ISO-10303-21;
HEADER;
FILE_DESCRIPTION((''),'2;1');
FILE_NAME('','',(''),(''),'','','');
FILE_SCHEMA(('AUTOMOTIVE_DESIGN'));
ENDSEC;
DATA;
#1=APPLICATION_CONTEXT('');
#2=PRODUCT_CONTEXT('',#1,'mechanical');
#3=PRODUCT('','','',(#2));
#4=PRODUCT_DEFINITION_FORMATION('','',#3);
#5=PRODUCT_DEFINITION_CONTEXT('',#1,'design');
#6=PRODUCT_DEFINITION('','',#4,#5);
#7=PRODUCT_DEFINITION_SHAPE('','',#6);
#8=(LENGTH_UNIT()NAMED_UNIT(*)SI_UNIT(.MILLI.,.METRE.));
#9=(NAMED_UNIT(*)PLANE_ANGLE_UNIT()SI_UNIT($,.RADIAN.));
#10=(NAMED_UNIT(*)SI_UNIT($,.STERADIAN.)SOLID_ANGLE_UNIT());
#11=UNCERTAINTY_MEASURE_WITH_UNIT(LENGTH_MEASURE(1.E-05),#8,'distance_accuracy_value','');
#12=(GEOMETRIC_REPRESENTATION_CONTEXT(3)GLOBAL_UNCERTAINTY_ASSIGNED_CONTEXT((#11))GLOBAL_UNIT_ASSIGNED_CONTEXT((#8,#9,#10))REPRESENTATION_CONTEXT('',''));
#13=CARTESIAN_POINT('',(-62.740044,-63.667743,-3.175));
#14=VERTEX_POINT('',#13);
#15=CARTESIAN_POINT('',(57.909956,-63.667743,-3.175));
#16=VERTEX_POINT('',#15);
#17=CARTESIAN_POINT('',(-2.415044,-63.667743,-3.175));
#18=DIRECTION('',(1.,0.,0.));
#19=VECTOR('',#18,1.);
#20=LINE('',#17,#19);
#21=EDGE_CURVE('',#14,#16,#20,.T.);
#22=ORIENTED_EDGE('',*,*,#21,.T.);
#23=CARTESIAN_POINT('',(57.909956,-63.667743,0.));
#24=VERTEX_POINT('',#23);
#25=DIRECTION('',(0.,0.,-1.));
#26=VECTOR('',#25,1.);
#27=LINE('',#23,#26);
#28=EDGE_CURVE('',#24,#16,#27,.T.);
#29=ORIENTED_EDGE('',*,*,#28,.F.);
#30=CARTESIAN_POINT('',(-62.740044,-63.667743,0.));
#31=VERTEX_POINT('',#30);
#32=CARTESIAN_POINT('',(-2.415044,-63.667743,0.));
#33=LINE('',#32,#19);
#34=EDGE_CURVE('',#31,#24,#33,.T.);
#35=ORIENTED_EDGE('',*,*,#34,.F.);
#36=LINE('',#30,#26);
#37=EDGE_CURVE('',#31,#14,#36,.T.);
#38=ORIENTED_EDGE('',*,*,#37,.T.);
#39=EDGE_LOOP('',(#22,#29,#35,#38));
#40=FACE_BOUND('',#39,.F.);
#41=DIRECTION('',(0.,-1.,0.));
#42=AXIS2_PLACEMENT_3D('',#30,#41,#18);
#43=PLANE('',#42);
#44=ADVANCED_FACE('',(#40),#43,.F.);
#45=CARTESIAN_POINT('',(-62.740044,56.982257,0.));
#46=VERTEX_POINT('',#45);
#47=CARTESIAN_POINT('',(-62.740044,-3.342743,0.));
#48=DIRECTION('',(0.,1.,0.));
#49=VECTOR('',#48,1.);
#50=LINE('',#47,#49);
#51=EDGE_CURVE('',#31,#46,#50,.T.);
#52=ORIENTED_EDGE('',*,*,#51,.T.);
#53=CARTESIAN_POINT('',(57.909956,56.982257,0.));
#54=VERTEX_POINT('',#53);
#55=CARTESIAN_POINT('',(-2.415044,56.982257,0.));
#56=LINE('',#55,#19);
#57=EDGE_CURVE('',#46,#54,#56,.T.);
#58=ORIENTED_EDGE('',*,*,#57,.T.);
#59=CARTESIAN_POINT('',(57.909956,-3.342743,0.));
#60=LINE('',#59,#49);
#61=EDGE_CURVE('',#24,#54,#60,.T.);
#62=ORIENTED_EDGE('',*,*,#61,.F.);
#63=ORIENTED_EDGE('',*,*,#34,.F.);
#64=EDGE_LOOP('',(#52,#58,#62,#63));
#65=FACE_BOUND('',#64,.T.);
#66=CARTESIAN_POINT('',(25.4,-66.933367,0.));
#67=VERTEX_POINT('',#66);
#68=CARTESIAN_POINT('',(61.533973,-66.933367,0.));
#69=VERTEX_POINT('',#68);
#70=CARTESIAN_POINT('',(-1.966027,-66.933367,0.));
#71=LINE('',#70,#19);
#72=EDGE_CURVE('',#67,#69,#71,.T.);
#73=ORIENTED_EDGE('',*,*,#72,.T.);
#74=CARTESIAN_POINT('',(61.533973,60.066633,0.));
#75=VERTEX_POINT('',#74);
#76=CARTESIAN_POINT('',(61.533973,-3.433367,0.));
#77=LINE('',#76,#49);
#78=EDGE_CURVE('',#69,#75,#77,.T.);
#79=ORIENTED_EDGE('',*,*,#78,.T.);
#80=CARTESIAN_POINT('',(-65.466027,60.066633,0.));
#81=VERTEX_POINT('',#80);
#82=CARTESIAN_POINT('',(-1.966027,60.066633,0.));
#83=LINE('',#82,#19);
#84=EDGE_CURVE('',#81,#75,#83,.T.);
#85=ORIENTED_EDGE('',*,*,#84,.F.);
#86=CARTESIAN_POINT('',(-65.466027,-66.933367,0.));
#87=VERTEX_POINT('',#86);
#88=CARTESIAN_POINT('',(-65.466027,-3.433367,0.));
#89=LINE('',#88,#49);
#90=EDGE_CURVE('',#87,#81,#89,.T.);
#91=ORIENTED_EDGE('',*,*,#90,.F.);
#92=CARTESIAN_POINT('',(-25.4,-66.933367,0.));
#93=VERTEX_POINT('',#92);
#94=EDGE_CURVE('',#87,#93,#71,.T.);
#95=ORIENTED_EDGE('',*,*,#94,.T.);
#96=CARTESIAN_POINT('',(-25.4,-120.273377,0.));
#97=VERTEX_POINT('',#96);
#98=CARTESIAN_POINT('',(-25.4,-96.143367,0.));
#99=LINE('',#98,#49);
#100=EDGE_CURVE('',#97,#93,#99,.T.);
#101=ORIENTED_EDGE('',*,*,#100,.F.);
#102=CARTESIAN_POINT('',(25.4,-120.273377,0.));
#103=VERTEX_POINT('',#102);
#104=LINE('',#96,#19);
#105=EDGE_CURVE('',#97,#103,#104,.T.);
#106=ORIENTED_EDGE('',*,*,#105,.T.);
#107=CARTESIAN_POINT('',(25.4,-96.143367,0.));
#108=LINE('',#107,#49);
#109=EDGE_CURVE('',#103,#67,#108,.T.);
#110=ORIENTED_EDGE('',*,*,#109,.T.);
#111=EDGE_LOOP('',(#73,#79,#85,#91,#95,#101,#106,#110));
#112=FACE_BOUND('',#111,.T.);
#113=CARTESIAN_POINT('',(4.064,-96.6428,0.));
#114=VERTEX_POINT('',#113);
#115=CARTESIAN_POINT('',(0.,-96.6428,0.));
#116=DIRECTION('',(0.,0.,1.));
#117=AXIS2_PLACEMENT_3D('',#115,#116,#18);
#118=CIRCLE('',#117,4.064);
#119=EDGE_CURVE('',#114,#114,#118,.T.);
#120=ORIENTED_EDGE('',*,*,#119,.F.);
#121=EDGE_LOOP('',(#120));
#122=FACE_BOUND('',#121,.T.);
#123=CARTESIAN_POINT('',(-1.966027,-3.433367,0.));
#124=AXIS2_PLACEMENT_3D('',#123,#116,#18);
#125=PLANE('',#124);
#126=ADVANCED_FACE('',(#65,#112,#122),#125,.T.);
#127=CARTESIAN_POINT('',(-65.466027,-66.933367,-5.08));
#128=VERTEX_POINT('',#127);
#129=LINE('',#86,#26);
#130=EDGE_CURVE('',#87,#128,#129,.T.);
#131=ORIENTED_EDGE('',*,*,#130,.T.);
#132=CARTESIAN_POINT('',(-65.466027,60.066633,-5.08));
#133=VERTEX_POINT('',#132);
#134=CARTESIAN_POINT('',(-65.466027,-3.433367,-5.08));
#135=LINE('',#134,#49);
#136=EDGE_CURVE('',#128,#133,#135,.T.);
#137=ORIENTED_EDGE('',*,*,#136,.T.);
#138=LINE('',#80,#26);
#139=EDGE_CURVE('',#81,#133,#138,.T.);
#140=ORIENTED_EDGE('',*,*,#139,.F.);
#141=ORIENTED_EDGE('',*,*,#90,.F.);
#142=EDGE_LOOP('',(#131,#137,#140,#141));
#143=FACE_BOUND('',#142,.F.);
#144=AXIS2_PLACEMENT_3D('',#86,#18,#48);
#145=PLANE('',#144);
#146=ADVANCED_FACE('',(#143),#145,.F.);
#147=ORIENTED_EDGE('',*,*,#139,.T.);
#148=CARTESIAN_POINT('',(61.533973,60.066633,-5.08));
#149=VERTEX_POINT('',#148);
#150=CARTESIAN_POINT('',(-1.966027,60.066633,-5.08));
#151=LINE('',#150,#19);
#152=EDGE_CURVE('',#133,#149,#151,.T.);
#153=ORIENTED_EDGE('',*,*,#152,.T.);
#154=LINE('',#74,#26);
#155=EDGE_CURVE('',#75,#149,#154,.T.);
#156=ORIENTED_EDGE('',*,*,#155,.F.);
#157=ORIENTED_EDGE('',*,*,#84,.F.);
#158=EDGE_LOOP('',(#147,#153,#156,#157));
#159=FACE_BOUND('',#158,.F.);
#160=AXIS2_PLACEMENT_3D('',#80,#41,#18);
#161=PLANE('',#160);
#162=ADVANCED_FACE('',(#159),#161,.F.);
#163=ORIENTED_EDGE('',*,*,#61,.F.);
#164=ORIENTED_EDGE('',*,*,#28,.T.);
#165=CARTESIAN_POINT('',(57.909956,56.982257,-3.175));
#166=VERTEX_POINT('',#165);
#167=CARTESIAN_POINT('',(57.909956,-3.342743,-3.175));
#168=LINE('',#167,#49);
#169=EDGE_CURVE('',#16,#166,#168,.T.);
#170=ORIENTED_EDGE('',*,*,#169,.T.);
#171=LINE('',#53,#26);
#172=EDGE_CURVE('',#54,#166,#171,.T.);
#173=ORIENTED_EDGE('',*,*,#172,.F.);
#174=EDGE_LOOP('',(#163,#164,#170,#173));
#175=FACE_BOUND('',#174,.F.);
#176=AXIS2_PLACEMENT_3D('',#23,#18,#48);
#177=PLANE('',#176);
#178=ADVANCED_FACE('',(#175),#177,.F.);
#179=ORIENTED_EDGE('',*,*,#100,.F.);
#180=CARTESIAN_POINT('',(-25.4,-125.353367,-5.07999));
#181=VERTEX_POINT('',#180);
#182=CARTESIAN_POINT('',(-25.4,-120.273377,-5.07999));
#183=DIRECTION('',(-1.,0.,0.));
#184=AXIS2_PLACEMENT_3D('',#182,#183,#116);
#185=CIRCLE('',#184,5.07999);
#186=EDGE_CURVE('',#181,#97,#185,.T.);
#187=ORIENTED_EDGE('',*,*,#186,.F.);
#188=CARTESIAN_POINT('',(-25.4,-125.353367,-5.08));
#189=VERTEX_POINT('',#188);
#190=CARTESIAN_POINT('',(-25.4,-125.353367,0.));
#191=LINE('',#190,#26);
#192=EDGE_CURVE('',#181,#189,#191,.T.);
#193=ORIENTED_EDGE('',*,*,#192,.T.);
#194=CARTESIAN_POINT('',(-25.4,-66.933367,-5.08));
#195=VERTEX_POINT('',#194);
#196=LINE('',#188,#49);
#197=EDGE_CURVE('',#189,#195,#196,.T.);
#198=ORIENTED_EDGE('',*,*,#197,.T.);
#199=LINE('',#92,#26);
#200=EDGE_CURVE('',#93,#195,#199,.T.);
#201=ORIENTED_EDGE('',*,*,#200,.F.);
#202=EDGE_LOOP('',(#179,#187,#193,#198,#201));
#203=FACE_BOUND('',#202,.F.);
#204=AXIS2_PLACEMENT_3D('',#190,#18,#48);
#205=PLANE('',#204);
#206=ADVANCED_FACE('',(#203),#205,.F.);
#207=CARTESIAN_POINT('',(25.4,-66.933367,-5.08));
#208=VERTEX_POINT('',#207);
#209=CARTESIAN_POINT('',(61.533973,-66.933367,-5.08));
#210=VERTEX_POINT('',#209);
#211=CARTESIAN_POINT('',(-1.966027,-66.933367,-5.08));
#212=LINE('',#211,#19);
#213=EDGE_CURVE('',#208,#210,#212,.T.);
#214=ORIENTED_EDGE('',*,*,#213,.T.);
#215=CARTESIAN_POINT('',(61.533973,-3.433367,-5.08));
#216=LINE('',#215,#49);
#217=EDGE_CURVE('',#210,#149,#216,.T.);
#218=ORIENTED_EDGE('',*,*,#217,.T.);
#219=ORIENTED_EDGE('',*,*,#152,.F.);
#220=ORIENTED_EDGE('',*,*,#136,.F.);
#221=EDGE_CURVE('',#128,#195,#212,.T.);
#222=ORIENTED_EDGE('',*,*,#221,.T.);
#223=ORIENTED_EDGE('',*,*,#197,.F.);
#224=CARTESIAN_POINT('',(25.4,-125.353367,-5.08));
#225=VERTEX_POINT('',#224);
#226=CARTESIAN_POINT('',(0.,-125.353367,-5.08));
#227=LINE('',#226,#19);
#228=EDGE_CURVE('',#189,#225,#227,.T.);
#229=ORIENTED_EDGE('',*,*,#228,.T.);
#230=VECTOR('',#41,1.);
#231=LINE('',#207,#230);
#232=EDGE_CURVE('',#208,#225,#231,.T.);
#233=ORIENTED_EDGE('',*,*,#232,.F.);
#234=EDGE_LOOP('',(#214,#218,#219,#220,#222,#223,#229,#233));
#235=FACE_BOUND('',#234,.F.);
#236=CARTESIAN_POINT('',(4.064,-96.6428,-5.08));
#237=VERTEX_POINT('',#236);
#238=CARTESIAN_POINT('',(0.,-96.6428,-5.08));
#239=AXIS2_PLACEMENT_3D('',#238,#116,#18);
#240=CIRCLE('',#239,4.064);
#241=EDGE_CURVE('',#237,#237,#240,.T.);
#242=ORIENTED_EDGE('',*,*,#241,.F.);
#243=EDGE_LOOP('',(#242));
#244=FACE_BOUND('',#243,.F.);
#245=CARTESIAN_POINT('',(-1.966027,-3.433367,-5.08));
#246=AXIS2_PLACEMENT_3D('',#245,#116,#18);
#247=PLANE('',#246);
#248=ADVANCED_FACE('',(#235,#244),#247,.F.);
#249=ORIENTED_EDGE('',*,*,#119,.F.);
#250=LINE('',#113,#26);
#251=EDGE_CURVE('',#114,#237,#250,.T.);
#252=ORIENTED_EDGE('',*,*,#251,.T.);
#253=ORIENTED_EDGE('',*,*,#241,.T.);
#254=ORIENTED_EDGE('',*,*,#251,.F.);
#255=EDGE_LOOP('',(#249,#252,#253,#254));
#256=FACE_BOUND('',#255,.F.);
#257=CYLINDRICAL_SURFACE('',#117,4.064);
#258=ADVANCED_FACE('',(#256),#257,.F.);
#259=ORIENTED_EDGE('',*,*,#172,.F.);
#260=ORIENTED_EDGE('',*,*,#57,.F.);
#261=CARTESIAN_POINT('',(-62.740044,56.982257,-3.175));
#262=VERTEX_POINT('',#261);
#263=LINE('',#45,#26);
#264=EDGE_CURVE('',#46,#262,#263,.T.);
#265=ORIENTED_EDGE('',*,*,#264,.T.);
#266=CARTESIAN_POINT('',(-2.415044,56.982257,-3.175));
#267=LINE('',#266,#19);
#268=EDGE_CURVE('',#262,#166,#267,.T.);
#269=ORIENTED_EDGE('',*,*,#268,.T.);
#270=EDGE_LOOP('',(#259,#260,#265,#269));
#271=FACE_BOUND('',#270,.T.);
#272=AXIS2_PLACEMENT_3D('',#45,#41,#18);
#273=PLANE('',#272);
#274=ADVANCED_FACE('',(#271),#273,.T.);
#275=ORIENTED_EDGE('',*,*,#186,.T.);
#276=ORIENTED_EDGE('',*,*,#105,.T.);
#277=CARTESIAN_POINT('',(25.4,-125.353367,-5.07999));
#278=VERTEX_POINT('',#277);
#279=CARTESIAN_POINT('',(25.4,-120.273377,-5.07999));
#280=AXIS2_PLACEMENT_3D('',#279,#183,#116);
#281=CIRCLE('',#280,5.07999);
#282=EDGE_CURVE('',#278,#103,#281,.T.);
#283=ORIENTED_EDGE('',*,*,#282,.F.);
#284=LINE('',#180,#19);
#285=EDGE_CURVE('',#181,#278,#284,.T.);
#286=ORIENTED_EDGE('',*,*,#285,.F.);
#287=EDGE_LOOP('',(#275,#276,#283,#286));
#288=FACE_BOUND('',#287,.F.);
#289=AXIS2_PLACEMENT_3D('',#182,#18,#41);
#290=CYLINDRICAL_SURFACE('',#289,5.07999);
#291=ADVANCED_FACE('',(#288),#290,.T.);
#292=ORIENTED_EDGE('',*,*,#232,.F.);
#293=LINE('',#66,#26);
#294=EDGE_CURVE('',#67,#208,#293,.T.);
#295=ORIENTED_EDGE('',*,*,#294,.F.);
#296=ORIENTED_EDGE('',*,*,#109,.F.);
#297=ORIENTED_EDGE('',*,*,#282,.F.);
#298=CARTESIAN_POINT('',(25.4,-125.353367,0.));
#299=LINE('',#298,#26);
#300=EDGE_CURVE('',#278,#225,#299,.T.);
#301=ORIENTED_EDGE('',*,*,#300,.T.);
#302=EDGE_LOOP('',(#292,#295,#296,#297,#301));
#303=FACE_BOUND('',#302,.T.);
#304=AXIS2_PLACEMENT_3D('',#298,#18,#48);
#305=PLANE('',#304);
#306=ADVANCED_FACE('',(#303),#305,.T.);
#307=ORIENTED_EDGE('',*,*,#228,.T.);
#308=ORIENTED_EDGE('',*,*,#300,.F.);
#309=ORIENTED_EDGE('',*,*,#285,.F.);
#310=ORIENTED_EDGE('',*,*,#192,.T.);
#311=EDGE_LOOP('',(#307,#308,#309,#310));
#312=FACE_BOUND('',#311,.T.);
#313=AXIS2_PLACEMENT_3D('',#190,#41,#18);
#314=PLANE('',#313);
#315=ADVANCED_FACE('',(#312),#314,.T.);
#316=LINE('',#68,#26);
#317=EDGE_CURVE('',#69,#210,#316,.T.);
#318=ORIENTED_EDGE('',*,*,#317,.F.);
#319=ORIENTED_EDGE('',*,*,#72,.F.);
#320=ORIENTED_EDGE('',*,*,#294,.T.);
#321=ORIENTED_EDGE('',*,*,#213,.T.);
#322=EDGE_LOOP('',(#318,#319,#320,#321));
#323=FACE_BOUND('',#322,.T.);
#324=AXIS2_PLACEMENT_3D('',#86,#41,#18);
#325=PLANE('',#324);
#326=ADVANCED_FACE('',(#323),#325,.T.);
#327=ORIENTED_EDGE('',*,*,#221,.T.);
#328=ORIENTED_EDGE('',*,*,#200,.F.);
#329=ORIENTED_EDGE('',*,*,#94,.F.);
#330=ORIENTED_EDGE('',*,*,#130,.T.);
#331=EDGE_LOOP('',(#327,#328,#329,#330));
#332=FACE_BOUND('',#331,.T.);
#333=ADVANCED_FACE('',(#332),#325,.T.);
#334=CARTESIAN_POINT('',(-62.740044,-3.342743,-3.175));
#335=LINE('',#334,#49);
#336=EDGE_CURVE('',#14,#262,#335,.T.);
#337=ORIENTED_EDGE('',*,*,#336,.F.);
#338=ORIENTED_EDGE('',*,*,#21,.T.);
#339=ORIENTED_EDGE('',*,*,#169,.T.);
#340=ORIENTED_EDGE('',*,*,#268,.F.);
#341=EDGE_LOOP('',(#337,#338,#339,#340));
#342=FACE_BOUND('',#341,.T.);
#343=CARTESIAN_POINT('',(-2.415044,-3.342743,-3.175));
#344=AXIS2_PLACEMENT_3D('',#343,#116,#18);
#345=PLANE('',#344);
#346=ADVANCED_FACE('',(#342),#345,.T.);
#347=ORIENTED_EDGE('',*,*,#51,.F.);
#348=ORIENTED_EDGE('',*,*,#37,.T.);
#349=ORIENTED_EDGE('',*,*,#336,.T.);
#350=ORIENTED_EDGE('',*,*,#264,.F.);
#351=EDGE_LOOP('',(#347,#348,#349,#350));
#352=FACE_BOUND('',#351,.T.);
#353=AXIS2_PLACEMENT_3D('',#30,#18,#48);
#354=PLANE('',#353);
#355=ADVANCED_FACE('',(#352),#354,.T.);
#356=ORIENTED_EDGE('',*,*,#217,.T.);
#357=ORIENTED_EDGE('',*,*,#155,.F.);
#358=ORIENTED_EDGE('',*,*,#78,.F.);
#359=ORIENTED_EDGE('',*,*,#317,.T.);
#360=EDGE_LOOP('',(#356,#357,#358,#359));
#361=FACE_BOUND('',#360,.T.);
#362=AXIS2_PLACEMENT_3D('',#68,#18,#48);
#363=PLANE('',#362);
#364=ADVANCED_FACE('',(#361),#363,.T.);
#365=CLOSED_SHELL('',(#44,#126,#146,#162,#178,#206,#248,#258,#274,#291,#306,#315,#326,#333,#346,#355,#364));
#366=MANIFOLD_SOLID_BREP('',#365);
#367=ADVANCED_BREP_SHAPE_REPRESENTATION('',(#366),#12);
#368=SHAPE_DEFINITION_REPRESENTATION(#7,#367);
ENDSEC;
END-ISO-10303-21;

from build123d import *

# Parameters (mm, degrees)
F0_W      = 127
F0_H      = 127
F2_DEPTH  = 5.08
F3_W      = 50.8
F3_H      = 58.42
F4_DEPTH  = 5.08
F5_W      = 50.8
F5_H      = 12.7
F6_DEPTH  = 2.54
F7_R      = 5.07999
F9_W      = 120.65
F9_H      = 120.65
F10_DEPTH = 3.175
F11_R     = 4.064
F12_DEPTH = 25.4


# Not quite as in the source:
# - a fillet or chamfer is up to 0.001 mm smaller than in the source, because OpenCascade refuses the exact size


with BuildPart() as f2:
    # F0 (on Top) → F2 (new body)
    with BuildSketch(Plane.XY):
        with Locations((-1.9660266274, -3.4333672374)):
            Rectangle(F0_W, F0_H)
    extrude(amount=-F2_DEPTH)

    # F3 (on face) → F4 (join)
    with BuildSketch(Plane.XY):
        with Locations((0, -96.1433672374)):
            Rectangle(F3_W, F3_H)
    extrude(amount=-F4_DEPTH)

    # F5 (on face) → F6 (cut)
    with BuildSketch(Plane.XZ.offset(125.3533672374)):
        with Locations((0, -11.43)):
            Rectangle(F5_W, F5_H)
    extrude(amount=-F6_DEPTH, mode=Mode.SUBTRACT)

    # F7 (radius 5.08 in the source; OpenCascade refuses exactly that, so slightly less here)
    f7_edges = [f2.edges().sort_by_distance(p)[0] for p in [
        (0, -125.353367, 0),
    ]]
    fillet(f7_edges, radius=F7_R)

    # F9 (on Top) → F10 (cut)
    with BuildSketch(Plane.XY):
        with Locations((-2.4150442332, -3.342743357)):
            Rectangle(F9_W, F9_H)
    extrude(amount=-F10_DEPTH, mode=Mode.SUBTRACT)

    # F11 (on face) → F12 (cut)
    with BuildSketch(Plane.XY):
        with Locations((0, -96.6428003655)):
            Circle(F11_R)
    extrude(amount=-F12_DEPTH, mode=Mode.SUBTRACT)


solid = f2.part
